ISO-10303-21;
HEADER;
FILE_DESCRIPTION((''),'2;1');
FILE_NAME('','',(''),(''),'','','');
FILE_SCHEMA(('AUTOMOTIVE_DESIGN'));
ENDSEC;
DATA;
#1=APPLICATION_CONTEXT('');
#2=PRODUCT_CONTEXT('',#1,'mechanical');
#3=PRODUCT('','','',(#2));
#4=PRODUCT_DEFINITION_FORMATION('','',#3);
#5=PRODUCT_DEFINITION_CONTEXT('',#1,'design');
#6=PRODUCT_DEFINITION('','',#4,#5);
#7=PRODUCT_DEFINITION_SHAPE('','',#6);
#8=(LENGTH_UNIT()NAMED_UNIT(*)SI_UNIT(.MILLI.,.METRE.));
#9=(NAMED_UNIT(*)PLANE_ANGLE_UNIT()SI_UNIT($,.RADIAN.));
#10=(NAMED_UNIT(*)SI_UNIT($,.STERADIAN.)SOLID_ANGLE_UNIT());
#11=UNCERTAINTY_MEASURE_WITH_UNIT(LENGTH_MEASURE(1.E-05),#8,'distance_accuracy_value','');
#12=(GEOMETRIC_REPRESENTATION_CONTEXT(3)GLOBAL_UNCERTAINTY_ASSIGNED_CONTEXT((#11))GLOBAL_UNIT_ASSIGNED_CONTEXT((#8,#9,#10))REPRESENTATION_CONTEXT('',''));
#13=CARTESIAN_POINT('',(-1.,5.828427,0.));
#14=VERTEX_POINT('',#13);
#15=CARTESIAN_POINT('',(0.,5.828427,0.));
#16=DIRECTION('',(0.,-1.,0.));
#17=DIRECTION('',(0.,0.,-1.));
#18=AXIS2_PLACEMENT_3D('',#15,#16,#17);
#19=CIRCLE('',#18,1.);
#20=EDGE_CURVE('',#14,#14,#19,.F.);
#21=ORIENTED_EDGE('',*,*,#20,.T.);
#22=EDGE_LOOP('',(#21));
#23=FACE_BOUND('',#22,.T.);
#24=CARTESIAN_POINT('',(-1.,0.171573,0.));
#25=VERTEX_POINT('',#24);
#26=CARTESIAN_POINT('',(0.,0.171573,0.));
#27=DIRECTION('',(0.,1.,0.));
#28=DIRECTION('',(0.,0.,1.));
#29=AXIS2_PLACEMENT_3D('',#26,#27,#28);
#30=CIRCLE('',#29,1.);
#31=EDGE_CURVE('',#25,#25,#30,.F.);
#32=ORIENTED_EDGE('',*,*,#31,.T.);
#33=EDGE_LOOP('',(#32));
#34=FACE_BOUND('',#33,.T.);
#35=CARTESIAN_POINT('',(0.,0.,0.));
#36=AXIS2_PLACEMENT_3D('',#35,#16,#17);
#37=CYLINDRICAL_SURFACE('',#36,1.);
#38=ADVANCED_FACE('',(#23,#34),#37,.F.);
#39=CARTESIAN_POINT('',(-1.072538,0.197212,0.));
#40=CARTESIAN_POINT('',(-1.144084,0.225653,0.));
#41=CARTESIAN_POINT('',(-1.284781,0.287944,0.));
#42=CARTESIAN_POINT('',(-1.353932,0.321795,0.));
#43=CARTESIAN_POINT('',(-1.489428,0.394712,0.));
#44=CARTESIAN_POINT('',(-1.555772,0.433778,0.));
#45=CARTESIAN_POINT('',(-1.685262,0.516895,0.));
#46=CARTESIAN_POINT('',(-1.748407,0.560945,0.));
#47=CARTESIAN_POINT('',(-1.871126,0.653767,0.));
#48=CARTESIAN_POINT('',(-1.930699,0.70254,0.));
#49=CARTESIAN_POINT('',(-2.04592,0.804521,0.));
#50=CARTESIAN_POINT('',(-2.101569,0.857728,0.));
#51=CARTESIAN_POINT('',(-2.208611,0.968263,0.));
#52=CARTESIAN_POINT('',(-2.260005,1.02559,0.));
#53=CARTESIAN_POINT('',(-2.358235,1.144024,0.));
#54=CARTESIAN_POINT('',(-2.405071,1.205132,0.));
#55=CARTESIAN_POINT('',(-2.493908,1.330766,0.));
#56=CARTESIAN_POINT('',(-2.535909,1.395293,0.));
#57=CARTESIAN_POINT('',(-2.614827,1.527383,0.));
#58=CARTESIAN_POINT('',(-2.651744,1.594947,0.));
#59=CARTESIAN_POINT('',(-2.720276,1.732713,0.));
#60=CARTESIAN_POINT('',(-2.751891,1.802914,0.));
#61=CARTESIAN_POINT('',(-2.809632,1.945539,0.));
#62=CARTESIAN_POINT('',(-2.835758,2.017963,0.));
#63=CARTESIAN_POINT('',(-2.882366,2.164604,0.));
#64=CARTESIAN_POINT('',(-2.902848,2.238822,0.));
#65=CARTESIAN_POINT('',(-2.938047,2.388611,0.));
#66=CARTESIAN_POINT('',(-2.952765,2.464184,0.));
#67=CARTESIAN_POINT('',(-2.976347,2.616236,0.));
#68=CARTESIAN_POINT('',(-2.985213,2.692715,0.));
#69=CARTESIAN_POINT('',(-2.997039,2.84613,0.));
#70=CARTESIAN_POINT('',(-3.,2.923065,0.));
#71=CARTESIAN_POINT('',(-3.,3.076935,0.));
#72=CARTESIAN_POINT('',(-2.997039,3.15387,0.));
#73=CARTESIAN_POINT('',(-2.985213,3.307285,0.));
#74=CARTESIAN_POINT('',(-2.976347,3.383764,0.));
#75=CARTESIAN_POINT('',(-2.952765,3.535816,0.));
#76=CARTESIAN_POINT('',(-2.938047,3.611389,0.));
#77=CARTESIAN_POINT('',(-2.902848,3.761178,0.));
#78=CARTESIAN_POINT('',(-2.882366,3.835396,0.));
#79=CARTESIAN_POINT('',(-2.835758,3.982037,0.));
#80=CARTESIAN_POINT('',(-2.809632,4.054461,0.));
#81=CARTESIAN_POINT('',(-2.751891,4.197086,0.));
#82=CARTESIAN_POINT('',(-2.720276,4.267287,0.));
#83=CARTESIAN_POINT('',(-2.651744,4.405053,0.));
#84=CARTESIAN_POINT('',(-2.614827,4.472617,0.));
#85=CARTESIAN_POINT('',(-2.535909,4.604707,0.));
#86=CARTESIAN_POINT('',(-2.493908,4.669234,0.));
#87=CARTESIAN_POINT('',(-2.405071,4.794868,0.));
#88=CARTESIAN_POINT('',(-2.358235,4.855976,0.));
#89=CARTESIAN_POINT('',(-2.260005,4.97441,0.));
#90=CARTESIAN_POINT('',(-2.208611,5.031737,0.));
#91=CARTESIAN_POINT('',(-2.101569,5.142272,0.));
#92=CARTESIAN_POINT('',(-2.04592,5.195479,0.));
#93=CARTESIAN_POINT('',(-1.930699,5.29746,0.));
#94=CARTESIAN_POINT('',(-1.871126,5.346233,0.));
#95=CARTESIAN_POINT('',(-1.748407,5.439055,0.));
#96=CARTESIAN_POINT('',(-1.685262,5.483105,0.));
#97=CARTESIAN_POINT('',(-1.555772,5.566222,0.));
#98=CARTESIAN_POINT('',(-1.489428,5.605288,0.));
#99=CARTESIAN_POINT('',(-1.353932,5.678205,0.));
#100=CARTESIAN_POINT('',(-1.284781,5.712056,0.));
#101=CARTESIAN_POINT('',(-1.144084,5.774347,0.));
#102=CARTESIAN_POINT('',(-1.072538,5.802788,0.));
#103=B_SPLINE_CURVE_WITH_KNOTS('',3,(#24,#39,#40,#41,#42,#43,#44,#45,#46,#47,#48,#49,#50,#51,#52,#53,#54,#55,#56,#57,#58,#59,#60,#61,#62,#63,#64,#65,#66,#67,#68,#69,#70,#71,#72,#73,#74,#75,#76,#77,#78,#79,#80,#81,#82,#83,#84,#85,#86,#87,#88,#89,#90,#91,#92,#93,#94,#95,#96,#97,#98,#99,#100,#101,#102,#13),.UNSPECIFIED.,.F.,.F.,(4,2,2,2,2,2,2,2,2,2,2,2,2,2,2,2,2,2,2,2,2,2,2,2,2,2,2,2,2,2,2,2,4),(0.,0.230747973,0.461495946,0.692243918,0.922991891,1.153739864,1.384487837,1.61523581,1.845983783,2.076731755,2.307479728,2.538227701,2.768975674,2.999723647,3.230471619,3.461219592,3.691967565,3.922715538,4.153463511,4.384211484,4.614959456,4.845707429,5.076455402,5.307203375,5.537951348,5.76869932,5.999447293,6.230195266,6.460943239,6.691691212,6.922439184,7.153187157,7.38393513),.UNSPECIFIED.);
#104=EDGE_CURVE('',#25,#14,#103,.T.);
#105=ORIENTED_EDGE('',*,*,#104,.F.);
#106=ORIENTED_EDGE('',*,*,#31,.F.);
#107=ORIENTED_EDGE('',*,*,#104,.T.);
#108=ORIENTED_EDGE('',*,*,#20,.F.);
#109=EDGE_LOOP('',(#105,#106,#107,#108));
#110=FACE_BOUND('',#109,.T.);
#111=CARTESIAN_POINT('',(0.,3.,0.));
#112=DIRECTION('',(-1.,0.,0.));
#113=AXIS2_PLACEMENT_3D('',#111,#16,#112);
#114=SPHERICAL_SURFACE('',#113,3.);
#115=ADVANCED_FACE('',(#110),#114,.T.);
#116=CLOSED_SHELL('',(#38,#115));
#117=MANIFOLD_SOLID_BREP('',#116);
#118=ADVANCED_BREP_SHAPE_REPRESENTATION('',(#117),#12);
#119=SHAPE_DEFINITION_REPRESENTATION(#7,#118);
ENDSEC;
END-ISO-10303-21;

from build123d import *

# Parameters (mm, degrees)
ENL_V_DE_MAT_R_VOL_MINCE1_OUTLINE_R = 1
ENL_V_DE_MAT_R_VOL_MINCE1_DEPTH     = 6


# Read off the part's stored shape, not the designer's step: Enlèv. de mat.-Révol.-Mince1
with BuildPart() as part:
    # Esquisse1 → Révolution1 (revolve)
    with BuildSketch(Plane.XY):
        with BuildLine():
            Line((0, 6), (0, 0))
            ThreePointArc((0, 0), (3, 3), (0, 6))
        make_face()
    revolve(axis=Axis((0, 0, 0), (0, 1, 0)))

    # Enlèv. de mat.-Révol.-Mince1 outline → Enlèv. de mat.-Révol.-Mince1 (cut)
    with BuildSketch(Plane(origin=(0, 0, 0), x_dir=(1, 0, 0), z_dir=(0, 1, 0))):
        Circle(ENL_V_DE_MAT_R_VOL_MINCE1_OUTLINE_R)
    extrude(amount=ENL_V_DE_MAT_R_VOL_MINCE1_DEPTH, mode=Mode.SUBTRACT)


solid = part.part
